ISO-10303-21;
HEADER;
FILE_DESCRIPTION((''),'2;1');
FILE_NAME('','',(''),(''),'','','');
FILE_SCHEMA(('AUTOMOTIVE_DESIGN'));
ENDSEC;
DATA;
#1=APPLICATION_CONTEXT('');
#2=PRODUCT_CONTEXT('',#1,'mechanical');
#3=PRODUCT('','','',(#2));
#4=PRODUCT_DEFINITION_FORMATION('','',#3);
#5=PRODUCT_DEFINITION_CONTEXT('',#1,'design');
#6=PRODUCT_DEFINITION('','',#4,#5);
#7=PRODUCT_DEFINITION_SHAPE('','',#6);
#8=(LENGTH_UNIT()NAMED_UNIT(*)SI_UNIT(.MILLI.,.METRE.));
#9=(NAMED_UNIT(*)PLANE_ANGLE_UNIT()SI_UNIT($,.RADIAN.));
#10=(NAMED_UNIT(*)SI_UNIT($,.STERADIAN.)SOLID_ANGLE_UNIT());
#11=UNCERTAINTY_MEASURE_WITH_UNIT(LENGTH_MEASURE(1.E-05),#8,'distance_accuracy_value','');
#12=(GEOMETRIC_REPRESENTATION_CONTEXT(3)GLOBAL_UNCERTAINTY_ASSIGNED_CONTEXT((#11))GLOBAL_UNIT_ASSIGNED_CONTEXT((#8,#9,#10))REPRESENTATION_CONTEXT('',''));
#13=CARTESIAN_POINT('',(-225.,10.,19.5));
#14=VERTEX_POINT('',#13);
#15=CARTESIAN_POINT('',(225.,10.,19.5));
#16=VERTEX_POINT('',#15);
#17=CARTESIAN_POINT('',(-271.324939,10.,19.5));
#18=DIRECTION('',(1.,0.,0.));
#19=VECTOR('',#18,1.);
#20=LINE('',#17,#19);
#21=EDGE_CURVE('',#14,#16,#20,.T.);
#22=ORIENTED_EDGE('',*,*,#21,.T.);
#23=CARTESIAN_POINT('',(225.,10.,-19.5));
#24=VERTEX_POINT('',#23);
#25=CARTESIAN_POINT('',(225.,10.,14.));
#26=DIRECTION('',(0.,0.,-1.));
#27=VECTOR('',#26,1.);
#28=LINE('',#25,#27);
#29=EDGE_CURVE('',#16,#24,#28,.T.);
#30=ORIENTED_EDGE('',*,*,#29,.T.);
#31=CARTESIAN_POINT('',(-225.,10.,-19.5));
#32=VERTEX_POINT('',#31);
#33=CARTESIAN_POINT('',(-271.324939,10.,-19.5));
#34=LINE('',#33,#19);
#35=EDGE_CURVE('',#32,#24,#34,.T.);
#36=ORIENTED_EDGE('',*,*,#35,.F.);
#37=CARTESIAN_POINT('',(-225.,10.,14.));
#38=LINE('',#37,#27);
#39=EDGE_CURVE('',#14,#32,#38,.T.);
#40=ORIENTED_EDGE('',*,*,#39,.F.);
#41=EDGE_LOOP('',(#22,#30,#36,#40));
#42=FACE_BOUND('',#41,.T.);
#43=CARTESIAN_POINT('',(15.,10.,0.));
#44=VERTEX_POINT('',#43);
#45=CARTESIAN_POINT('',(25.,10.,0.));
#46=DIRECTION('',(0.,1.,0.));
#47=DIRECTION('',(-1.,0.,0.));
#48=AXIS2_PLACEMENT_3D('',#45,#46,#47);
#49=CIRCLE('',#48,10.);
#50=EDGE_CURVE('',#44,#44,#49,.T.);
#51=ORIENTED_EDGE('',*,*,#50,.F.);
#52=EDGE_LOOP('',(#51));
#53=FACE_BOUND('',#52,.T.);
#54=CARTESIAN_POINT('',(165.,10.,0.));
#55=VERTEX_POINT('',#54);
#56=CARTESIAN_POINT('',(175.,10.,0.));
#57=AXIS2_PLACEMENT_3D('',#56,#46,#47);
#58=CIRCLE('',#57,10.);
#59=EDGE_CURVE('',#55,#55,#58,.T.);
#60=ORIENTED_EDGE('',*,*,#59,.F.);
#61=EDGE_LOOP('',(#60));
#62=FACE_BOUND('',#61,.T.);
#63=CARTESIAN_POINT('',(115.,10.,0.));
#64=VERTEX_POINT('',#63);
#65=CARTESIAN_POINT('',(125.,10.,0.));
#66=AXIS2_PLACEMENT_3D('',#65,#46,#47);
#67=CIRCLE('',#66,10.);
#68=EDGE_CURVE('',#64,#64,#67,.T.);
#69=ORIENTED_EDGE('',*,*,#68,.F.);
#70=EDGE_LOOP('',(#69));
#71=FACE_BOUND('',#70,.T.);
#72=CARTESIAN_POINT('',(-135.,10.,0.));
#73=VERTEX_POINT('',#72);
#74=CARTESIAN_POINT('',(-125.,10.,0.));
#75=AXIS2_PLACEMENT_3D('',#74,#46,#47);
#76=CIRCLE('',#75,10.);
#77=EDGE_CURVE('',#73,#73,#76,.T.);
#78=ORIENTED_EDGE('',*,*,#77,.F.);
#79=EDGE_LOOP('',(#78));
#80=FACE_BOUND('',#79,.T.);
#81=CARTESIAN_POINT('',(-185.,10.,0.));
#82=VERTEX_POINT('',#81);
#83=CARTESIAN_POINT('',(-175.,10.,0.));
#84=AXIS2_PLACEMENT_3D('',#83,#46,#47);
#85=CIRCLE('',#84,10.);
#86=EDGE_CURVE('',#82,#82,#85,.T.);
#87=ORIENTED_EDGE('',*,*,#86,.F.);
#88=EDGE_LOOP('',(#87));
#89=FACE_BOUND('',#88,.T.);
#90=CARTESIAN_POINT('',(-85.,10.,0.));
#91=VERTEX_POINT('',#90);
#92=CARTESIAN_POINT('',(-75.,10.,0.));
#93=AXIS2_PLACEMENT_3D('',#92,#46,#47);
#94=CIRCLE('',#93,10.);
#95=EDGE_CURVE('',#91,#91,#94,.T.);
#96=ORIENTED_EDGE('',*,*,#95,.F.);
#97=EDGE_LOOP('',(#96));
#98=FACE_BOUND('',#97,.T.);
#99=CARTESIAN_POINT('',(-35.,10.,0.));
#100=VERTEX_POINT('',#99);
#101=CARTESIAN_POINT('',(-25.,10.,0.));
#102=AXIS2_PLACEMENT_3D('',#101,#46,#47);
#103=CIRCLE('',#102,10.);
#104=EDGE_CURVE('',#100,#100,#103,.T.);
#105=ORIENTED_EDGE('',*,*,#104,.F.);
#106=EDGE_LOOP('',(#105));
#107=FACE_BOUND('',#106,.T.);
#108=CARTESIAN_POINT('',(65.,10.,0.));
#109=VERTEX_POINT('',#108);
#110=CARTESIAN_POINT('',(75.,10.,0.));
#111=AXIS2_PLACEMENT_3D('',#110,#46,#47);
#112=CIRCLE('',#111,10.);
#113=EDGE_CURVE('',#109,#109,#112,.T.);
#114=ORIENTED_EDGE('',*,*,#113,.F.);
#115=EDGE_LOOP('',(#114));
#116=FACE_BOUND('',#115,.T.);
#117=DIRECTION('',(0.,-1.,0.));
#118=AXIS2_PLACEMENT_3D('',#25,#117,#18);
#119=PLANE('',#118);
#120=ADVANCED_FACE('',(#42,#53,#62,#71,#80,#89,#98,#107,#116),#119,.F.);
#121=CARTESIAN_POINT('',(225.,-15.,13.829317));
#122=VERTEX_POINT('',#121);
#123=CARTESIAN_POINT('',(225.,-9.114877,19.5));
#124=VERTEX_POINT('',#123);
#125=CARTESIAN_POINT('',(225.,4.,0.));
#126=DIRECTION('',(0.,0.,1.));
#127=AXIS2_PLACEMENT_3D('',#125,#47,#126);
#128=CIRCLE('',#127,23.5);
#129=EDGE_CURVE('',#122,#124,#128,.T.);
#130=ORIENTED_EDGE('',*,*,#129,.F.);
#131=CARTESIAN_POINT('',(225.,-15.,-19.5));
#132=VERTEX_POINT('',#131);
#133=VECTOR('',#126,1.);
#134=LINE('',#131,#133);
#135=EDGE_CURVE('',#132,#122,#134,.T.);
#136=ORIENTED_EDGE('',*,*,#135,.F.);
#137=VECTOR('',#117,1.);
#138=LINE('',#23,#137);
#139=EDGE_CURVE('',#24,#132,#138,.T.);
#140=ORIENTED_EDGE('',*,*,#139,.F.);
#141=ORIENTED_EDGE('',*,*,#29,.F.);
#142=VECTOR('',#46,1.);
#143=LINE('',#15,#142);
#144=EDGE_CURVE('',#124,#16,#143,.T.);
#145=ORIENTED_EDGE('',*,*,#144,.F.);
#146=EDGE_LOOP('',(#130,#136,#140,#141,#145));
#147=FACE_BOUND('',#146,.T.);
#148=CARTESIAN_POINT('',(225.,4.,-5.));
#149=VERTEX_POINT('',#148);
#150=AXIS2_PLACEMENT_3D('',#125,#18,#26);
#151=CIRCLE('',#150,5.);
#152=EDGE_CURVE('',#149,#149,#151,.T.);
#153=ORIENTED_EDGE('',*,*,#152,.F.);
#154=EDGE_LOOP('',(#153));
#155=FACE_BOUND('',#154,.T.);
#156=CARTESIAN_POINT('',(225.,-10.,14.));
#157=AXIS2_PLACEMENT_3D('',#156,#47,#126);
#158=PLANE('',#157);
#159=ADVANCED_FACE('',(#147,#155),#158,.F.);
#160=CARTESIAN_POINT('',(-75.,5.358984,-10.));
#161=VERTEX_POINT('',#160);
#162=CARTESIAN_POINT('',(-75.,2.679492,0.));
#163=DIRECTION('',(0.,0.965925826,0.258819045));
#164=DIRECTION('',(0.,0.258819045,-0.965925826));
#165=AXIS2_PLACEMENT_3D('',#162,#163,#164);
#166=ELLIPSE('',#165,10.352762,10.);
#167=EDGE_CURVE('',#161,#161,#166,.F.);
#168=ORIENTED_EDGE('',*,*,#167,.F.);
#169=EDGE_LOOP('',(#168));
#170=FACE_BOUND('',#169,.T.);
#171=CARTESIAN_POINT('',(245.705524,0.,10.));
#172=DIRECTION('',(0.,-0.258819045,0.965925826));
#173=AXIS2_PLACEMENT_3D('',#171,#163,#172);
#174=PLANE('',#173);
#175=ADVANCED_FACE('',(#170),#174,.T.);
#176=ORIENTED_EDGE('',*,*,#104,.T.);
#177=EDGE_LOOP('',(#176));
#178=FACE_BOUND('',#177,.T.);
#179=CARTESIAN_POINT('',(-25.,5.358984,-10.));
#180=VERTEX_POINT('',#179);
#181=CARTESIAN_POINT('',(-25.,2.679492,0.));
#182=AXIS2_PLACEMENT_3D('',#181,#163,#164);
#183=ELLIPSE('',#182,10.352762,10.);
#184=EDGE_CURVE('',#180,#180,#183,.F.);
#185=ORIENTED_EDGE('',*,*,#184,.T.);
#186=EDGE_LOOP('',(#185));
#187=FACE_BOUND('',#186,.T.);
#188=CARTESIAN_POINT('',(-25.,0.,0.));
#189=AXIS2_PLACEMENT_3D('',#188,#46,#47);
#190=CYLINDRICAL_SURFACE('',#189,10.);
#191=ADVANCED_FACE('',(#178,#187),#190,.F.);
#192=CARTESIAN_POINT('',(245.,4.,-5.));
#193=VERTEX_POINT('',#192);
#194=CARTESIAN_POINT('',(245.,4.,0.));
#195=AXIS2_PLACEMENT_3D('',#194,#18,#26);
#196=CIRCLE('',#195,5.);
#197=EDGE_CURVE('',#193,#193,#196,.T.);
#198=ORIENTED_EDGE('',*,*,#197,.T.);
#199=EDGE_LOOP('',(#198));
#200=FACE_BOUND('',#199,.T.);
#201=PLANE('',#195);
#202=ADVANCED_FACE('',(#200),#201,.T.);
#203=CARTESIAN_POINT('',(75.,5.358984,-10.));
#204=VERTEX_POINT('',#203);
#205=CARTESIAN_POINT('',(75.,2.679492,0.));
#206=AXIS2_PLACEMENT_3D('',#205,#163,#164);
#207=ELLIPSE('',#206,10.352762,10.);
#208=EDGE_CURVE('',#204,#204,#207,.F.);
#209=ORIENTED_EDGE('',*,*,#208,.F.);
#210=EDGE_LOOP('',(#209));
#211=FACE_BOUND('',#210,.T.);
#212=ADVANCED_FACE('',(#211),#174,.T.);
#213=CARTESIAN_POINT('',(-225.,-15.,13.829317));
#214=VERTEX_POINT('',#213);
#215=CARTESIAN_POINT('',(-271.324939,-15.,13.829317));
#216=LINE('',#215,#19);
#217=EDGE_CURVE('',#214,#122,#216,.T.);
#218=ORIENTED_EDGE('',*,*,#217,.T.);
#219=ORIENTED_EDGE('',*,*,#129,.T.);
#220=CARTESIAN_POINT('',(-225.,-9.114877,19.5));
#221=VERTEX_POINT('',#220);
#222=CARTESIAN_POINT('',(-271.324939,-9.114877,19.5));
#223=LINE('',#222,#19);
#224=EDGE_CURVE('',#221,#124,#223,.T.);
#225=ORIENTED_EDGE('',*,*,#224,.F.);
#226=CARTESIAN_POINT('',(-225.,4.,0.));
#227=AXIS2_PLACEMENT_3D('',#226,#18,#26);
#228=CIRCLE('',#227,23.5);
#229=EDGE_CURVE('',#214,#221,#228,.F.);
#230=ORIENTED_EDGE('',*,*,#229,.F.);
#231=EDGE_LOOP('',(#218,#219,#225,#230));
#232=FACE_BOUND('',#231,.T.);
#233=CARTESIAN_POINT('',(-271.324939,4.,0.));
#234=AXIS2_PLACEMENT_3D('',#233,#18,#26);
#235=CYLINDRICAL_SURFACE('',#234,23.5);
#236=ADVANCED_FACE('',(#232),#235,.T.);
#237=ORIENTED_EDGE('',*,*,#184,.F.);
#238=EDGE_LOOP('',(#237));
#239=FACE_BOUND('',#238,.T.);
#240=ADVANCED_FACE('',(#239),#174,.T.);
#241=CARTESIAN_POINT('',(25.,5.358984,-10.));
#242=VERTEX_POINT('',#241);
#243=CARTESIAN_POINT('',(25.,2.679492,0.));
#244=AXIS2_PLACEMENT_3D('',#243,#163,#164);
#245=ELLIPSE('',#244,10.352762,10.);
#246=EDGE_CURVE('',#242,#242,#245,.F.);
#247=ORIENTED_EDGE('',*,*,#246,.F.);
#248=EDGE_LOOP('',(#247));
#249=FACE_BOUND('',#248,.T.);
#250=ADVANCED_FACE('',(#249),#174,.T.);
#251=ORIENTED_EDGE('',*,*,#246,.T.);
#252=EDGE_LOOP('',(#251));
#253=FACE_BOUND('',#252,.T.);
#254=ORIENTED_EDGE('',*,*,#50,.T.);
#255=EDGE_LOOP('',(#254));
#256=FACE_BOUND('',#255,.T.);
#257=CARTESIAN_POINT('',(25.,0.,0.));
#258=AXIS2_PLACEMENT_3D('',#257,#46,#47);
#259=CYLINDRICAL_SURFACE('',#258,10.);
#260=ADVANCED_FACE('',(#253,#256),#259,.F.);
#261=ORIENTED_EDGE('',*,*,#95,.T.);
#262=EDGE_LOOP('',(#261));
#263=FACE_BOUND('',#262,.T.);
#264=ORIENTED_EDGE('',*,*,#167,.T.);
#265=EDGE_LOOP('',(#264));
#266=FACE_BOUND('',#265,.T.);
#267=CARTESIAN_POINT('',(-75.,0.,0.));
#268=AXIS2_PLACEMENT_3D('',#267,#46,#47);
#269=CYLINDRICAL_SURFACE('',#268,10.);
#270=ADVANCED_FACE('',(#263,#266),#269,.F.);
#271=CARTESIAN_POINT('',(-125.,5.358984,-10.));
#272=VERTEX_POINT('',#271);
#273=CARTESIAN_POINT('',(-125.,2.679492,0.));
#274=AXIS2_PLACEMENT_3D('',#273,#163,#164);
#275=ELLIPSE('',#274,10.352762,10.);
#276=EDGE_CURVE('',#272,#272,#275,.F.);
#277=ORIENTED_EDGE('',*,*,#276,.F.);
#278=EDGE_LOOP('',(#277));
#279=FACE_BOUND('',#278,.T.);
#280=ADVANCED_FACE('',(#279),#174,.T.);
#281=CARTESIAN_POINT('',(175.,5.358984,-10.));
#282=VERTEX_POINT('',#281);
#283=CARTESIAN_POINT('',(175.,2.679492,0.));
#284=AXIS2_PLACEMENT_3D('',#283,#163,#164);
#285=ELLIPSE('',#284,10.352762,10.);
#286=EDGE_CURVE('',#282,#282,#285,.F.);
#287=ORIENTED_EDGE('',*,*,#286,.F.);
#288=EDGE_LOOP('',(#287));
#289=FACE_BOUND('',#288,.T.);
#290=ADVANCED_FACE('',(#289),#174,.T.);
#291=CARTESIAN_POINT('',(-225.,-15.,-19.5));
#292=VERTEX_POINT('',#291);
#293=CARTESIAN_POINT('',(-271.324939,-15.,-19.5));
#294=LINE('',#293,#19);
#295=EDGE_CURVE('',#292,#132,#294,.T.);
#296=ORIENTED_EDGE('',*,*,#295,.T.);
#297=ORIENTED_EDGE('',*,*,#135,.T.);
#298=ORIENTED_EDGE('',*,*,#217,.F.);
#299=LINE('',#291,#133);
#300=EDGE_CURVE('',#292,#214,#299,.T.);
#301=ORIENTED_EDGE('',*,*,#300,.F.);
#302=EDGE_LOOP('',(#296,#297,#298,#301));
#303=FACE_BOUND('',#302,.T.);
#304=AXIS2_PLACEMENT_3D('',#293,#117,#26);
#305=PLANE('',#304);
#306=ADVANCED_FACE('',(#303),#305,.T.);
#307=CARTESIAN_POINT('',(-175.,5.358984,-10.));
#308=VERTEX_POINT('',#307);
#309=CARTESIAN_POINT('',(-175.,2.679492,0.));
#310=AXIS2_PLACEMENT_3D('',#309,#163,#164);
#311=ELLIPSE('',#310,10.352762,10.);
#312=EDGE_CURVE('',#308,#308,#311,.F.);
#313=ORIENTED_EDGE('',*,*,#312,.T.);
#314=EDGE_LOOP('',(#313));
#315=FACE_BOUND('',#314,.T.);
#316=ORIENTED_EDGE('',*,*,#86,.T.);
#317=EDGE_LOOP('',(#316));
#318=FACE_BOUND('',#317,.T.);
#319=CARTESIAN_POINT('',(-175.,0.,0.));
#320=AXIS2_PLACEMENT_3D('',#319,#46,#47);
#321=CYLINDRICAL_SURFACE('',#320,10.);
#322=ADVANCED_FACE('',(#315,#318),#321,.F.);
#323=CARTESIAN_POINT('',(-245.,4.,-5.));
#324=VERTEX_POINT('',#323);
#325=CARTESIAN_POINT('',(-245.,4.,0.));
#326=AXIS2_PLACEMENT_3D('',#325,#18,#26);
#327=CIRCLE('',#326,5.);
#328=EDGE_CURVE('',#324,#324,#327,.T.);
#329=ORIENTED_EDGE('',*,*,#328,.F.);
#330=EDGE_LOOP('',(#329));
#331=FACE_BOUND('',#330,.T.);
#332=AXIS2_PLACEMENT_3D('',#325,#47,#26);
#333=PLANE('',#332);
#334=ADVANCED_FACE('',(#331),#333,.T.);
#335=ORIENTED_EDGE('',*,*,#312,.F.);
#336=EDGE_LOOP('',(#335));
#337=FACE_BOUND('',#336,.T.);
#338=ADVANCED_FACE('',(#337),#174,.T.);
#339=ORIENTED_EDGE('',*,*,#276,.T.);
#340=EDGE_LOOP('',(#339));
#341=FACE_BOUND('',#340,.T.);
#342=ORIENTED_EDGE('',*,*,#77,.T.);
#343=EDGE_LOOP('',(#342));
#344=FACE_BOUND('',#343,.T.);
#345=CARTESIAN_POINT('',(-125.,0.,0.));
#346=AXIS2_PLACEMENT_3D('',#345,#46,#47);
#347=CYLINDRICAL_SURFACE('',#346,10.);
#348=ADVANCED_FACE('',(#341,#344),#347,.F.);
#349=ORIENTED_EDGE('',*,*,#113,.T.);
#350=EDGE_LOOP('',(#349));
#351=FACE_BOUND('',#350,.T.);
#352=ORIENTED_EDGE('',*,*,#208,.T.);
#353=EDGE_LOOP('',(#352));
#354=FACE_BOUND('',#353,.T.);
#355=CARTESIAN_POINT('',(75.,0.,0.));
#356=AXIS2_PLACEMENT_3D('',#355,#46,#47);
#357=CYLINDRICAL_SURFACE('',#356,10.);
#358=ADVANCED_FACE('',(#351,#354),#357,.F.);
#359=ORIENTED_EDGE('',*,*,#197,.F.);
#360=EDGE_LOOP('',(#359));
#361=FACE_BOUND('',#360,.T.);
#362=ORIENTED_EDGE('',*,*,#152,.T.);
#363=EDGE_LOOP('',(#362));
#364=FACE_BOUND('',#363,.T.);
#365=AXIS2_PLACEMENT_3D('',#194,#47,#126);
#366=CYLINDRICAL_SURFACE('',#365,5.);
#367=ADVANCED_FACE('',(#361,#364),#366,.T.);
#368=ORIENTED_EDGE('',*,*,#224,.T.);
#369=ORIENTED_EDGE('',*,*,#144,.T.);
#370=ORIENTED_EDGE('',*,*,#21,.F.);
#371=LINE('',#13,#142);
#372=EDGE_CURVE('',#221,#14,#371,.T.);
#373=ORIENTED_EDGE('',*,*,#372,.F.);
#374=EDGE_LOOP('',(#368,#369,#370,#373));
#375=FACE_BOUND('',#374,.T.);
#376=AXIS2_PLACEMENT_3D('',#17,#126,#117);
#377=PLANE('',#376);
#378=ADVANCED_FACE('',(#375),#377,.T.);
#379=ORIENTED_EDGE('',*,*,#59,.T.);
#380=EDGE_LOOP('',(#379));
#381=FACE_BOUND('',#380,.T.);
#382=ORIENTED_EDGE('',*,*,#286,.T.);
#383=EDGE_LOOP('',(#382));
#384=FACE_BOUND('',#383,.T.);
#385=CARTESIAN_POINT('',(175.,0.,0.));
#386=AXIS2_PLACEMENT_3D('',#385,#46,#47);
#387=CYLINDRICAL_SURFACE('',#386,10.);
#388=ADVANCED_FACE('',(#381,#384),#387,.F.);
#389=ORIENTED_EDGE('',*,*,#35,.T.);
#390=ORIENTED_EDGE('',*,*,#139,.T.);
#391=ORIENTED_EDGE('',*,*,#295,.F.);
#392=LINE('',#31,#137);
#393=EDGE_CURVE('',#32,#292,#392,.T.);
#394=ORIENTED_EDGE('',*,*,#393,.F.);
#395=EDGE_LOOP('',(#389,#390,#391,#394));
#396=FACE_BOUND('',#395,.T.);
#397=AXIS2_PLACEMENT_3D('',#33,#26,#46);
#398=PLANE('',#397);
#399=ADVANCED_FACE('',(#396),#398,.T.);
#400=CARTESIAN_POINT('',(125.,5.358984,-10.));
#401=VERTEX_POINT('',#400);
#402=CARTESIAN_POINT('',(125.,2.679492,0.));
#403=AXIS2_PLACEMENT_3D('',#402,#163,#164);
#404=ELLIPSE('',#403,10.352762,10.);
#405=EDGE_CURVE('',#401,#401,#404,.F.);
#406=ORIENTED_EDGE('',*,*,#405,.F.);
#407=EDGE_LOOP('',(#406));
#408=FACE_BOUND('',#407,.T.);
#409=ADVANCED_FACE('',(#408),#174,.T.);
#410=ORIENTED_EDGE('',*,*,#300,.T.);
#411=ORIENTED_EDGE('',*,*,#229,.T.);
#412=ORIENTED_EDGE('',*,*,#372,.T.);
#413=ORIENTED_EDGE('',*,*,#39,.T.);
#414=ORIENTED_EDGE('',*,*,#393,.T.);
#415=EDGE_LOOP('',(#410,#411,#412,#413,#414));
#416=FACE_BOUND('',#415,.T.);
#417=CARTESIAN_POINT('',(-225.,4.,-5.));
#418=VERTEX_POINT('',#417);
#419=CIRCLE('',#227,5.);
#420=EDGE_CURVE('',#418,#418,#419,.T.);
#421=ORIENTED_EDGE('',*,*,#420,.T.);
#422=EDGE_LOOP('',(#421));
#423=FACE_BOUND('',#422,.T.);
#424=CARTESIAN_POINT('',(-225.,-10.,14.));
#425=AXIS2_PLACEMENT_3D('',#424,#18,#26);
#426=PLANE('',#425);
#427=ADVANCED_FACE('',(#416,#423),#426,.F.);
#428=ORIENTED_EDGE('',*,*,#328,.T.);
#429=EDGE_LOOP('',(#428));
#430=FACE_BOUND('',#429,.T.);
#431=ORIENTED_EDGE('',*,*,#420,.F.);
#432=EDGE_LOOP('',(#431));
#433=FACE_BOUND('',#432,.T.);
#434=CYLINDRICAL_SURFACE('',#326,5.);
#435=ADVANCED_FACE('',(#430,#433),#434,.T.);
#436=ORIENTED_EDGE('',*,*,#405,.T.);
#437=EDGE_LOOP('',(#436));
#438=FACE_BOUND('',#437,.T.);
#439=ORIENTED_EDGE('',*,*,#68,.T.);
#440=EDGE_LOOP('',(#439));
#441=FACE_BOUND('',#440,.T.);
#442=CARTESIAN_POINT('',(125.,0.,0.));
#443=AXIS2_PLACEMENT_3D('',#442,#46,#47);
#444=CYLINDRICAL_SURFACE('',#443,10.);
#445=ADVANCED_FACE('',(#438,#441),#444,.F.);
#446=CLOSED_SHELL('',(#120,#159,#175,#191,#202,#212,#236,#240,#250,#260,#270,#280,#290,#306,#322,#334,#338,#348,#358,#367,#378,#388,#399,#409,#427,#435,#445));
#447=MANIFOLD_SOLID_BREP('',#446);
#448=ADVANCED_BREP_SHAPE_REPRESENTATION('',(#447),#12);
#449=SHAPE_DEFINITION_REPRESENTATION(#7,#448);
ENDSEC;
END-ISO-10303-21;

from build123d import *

# Parameters (mm, degrees)
SKETCH1_W                       = 450
SKETCH1_H                       = 20
BOSS_EXTRUDE1_DEPTH             = 14
SKETCH2_R                       = 10
CUT_EXTRUDE1_DEPTH              = 10
LPATTERN1_COUNT                 = 8
LPATTERN1_PITCH                 = 50
SKETCH3_R                       = 5
BOSS_EXTRUDE2_DEPTH             = 20
FILLET1_R                       = 14
BOSS_EXTRUDE3_REACH             = 472.315
BOSS_EXTRUDE4_REACH             = 247.603
BOSS_EXTRUDE4_DIRECTION_2_REACH = 247.603


with BuildPart() as part:
    # Sketch1 → Boss-Extrude1 (new, symmetric)
    with BuildSketch(Plane.XY):
        Rectangle(SKETCH1_W, SKETCH1_H)
    extrude(amount=BOSS_EXTRUDE1_DEPTH, both=True)

    # Sketch2 → Cut-Extrude1 (cut)
    with BuildSketch(Plane(origin=(0, 10, 0), x_dir=(1, 0, 0), z_dir=(0, 1, 0))):
        with Locations(Location((-175, 0, 0), (0, 0, 180))):
            Circle(SKETCH2_R)
    cut_extrude1 = extrude(amount=-CUT_EXTRUDE1_DEPTH, mode=Mode.SUBTRACT)

    # LPattern1: Cut-Extrude1 ×8
    with Locations(*[(i * LPATTERN1_PITCH, 0, 0) for i in range(1, LPATTERN1_COUNT)]):
        add(cut_extrude1, mode=Mode.SUBTRACT)

    # Sketch3 → Boss-Extrude2 (add)
    with BuildSketch(Plane(origin=(225, 0, 0), x_dir=(0, 0, -1), z_dir=(1, 0, 0))):
        with Locations((0, 4)):
            Circle(SKETCH3_R)
    boss_extrude2 = extrude(amount=BOSS_EXTRUDE2_DEPTH)

    # Mirror1: Boss-Extrude2 across plane
    add(boss_extrude2.mirror(Plane(origin=(0, 0, 0), x_dir=(0, 0, 1), z_dir=(1, 0, 0))))

    # Fillet1
    fillet1_edges = [part.edges().sort_by_distance(p)[0] for p in [
        (0, -10, 14),
        (0, -10, -14),
    ]]
    fillet(fillet1_edges, radius=FILLET1_R - 0.0001)  # a hair under: the kernel refuses the full size

    # Boss-Extrude3: up to this face of the body (flat: up to its plane)
    boss_extrude3_end = Plane(part.part.faces().sort_by_distance((225, 6.99995, -13.655906989))[0])
    # Sketch5 → Boss-Extrude3 (add, up to the picked face)
    with BuildSketch(Plane.ZY.offset(225), mode=Mode.PRIVATE) as boss_extrude3_sk1:
        Polygon((10, 0), (-10, 0), (-10, 5.358983849), align=None)
    boss_extrude3_tool1 = split(extrude(boss_extrude3_sk1.sketch, amount=-BOSS_EXTRUDE3_REACH, mode=Mode.PRIVATE), bisect_by=boss_extrude3_end, keep=Keep.BOTH, mode=Mode.PRIVATE)
    add(boss_extrude3_tool1.solids().sort_by(Axis((-225, 1.786328, -3.333333), (1, 0, 0)))[0])

    # Boss-Extrude4: up to this face of the body (flat: up to its plane)
    boss_extrude4_end = Plane(part.part.faces().sort_by_distance((-225, 6.99995, -13.655906989))[0])
    # Sketch6 → Boss-Extrude4 (add, up to the picked face)
    with BuildSketch(Plane(origin=(0, 0, 0), x_dir=(0, 0, -1), z_dir=(1, 0, 0)), mode=Mode.PRIVATE) as boss_extrude4_sk1:
        with BuildLine():
            Line((-19.5, 10), (-14, 10))
            Line((-14, 10), (-14, 4))
            ThreePointArc((-14, 4), (-9.899494937, -5.899494937), (0, -10))
            ThreePointArc((0, -10), (9.899494937, -5.899494937), (14, 4))
            Line((14, 4), (14, 10))
            Line((14, 10), (19.5, 10))
            Line((19.5, 10), (19.5, -15))
            Line((19.5, -15), (-13.829316686, -15))
            ThreePointArc((-13.829316686, -15), (-16.922455665, -12.305842336), (-19.5, -9.114877049))
            Line((-19.5, -9.114877049), (-19.5, 10))
        make_face()
    boss_extrude4_tool1 = split(extrude(boss_extrude4_sk1.sketch, amount=-BOSS_EXTRUDE4_REACH, mode=Mode.PRIVATE), bisect_by=boss_extrude4_end, keep=Keep.BOTH, mode=Mode.PRIVATE)
    add(boss_extrude4_tool1.solids().sort_by(Axis((0, 0.442561, 19.036751), (-1, 0, 0)))[0])

    # Boss-Extrude4 direction 2: up to this face of the body (flat: up to its plane)
    boss_extrude4_direction_2_end = Plane(part.part.faces().sort_by_distance((225, 6.99995, -13.655906989))[0])
    # Sketch6 → Boss-Extrude4 direction 2 (add, up to the picked face)
    with BuildSketch(Plane(origin=(0, 0, 0), x_dir=(0, 0, -1), z_dir=(1, 0, 0)), mode=Mode.PRIVATE) as boss_extrude4_direction_2_sk1:
        with BuildLine():
            Line((-19.5, 10), (-14, 10))
            Line((-14, 10), (-14, 4))
            ThreePointArc((-14, 4), (-9.899494937, -5.899494937), (0, -10))
            ThreePointArc((0, -10), (9.899494937, -5.899494937), (14, 4))
            Line((14, 4), (14, 10))
            Line((14, 10), (19.5, 10))
            Line((19.5, 10), (19.5, -15))
            Line((19.5, -15), (-13.829316686, -15))
            ThreePointArc((-13.829316686, -15), (-16.922455665, -12.305842336), (-19.5, -9.114877049))
            Line((-19.5, -9.114877049), (-19.5, 10))
        make_face()
    boss_extrude4_direction_2_tool1 = split(extrude(boss_extrude4_direction_2_sk1.sketch, amount=BOSS_EXTRUDE4_DIRECTION_2_REACH, mode=Mode.PRIVATE), bisect_by=boss_extrude4_direction_2_end, keep=Keep.BOTH, mode=Mode.PRIVATE)
    add(boss_extrude4_direction_2_tool1.solids().sort_by(Axis((0, 0.442561, 19.036751), (1, 0, 0)))[0])


solid = part.part
